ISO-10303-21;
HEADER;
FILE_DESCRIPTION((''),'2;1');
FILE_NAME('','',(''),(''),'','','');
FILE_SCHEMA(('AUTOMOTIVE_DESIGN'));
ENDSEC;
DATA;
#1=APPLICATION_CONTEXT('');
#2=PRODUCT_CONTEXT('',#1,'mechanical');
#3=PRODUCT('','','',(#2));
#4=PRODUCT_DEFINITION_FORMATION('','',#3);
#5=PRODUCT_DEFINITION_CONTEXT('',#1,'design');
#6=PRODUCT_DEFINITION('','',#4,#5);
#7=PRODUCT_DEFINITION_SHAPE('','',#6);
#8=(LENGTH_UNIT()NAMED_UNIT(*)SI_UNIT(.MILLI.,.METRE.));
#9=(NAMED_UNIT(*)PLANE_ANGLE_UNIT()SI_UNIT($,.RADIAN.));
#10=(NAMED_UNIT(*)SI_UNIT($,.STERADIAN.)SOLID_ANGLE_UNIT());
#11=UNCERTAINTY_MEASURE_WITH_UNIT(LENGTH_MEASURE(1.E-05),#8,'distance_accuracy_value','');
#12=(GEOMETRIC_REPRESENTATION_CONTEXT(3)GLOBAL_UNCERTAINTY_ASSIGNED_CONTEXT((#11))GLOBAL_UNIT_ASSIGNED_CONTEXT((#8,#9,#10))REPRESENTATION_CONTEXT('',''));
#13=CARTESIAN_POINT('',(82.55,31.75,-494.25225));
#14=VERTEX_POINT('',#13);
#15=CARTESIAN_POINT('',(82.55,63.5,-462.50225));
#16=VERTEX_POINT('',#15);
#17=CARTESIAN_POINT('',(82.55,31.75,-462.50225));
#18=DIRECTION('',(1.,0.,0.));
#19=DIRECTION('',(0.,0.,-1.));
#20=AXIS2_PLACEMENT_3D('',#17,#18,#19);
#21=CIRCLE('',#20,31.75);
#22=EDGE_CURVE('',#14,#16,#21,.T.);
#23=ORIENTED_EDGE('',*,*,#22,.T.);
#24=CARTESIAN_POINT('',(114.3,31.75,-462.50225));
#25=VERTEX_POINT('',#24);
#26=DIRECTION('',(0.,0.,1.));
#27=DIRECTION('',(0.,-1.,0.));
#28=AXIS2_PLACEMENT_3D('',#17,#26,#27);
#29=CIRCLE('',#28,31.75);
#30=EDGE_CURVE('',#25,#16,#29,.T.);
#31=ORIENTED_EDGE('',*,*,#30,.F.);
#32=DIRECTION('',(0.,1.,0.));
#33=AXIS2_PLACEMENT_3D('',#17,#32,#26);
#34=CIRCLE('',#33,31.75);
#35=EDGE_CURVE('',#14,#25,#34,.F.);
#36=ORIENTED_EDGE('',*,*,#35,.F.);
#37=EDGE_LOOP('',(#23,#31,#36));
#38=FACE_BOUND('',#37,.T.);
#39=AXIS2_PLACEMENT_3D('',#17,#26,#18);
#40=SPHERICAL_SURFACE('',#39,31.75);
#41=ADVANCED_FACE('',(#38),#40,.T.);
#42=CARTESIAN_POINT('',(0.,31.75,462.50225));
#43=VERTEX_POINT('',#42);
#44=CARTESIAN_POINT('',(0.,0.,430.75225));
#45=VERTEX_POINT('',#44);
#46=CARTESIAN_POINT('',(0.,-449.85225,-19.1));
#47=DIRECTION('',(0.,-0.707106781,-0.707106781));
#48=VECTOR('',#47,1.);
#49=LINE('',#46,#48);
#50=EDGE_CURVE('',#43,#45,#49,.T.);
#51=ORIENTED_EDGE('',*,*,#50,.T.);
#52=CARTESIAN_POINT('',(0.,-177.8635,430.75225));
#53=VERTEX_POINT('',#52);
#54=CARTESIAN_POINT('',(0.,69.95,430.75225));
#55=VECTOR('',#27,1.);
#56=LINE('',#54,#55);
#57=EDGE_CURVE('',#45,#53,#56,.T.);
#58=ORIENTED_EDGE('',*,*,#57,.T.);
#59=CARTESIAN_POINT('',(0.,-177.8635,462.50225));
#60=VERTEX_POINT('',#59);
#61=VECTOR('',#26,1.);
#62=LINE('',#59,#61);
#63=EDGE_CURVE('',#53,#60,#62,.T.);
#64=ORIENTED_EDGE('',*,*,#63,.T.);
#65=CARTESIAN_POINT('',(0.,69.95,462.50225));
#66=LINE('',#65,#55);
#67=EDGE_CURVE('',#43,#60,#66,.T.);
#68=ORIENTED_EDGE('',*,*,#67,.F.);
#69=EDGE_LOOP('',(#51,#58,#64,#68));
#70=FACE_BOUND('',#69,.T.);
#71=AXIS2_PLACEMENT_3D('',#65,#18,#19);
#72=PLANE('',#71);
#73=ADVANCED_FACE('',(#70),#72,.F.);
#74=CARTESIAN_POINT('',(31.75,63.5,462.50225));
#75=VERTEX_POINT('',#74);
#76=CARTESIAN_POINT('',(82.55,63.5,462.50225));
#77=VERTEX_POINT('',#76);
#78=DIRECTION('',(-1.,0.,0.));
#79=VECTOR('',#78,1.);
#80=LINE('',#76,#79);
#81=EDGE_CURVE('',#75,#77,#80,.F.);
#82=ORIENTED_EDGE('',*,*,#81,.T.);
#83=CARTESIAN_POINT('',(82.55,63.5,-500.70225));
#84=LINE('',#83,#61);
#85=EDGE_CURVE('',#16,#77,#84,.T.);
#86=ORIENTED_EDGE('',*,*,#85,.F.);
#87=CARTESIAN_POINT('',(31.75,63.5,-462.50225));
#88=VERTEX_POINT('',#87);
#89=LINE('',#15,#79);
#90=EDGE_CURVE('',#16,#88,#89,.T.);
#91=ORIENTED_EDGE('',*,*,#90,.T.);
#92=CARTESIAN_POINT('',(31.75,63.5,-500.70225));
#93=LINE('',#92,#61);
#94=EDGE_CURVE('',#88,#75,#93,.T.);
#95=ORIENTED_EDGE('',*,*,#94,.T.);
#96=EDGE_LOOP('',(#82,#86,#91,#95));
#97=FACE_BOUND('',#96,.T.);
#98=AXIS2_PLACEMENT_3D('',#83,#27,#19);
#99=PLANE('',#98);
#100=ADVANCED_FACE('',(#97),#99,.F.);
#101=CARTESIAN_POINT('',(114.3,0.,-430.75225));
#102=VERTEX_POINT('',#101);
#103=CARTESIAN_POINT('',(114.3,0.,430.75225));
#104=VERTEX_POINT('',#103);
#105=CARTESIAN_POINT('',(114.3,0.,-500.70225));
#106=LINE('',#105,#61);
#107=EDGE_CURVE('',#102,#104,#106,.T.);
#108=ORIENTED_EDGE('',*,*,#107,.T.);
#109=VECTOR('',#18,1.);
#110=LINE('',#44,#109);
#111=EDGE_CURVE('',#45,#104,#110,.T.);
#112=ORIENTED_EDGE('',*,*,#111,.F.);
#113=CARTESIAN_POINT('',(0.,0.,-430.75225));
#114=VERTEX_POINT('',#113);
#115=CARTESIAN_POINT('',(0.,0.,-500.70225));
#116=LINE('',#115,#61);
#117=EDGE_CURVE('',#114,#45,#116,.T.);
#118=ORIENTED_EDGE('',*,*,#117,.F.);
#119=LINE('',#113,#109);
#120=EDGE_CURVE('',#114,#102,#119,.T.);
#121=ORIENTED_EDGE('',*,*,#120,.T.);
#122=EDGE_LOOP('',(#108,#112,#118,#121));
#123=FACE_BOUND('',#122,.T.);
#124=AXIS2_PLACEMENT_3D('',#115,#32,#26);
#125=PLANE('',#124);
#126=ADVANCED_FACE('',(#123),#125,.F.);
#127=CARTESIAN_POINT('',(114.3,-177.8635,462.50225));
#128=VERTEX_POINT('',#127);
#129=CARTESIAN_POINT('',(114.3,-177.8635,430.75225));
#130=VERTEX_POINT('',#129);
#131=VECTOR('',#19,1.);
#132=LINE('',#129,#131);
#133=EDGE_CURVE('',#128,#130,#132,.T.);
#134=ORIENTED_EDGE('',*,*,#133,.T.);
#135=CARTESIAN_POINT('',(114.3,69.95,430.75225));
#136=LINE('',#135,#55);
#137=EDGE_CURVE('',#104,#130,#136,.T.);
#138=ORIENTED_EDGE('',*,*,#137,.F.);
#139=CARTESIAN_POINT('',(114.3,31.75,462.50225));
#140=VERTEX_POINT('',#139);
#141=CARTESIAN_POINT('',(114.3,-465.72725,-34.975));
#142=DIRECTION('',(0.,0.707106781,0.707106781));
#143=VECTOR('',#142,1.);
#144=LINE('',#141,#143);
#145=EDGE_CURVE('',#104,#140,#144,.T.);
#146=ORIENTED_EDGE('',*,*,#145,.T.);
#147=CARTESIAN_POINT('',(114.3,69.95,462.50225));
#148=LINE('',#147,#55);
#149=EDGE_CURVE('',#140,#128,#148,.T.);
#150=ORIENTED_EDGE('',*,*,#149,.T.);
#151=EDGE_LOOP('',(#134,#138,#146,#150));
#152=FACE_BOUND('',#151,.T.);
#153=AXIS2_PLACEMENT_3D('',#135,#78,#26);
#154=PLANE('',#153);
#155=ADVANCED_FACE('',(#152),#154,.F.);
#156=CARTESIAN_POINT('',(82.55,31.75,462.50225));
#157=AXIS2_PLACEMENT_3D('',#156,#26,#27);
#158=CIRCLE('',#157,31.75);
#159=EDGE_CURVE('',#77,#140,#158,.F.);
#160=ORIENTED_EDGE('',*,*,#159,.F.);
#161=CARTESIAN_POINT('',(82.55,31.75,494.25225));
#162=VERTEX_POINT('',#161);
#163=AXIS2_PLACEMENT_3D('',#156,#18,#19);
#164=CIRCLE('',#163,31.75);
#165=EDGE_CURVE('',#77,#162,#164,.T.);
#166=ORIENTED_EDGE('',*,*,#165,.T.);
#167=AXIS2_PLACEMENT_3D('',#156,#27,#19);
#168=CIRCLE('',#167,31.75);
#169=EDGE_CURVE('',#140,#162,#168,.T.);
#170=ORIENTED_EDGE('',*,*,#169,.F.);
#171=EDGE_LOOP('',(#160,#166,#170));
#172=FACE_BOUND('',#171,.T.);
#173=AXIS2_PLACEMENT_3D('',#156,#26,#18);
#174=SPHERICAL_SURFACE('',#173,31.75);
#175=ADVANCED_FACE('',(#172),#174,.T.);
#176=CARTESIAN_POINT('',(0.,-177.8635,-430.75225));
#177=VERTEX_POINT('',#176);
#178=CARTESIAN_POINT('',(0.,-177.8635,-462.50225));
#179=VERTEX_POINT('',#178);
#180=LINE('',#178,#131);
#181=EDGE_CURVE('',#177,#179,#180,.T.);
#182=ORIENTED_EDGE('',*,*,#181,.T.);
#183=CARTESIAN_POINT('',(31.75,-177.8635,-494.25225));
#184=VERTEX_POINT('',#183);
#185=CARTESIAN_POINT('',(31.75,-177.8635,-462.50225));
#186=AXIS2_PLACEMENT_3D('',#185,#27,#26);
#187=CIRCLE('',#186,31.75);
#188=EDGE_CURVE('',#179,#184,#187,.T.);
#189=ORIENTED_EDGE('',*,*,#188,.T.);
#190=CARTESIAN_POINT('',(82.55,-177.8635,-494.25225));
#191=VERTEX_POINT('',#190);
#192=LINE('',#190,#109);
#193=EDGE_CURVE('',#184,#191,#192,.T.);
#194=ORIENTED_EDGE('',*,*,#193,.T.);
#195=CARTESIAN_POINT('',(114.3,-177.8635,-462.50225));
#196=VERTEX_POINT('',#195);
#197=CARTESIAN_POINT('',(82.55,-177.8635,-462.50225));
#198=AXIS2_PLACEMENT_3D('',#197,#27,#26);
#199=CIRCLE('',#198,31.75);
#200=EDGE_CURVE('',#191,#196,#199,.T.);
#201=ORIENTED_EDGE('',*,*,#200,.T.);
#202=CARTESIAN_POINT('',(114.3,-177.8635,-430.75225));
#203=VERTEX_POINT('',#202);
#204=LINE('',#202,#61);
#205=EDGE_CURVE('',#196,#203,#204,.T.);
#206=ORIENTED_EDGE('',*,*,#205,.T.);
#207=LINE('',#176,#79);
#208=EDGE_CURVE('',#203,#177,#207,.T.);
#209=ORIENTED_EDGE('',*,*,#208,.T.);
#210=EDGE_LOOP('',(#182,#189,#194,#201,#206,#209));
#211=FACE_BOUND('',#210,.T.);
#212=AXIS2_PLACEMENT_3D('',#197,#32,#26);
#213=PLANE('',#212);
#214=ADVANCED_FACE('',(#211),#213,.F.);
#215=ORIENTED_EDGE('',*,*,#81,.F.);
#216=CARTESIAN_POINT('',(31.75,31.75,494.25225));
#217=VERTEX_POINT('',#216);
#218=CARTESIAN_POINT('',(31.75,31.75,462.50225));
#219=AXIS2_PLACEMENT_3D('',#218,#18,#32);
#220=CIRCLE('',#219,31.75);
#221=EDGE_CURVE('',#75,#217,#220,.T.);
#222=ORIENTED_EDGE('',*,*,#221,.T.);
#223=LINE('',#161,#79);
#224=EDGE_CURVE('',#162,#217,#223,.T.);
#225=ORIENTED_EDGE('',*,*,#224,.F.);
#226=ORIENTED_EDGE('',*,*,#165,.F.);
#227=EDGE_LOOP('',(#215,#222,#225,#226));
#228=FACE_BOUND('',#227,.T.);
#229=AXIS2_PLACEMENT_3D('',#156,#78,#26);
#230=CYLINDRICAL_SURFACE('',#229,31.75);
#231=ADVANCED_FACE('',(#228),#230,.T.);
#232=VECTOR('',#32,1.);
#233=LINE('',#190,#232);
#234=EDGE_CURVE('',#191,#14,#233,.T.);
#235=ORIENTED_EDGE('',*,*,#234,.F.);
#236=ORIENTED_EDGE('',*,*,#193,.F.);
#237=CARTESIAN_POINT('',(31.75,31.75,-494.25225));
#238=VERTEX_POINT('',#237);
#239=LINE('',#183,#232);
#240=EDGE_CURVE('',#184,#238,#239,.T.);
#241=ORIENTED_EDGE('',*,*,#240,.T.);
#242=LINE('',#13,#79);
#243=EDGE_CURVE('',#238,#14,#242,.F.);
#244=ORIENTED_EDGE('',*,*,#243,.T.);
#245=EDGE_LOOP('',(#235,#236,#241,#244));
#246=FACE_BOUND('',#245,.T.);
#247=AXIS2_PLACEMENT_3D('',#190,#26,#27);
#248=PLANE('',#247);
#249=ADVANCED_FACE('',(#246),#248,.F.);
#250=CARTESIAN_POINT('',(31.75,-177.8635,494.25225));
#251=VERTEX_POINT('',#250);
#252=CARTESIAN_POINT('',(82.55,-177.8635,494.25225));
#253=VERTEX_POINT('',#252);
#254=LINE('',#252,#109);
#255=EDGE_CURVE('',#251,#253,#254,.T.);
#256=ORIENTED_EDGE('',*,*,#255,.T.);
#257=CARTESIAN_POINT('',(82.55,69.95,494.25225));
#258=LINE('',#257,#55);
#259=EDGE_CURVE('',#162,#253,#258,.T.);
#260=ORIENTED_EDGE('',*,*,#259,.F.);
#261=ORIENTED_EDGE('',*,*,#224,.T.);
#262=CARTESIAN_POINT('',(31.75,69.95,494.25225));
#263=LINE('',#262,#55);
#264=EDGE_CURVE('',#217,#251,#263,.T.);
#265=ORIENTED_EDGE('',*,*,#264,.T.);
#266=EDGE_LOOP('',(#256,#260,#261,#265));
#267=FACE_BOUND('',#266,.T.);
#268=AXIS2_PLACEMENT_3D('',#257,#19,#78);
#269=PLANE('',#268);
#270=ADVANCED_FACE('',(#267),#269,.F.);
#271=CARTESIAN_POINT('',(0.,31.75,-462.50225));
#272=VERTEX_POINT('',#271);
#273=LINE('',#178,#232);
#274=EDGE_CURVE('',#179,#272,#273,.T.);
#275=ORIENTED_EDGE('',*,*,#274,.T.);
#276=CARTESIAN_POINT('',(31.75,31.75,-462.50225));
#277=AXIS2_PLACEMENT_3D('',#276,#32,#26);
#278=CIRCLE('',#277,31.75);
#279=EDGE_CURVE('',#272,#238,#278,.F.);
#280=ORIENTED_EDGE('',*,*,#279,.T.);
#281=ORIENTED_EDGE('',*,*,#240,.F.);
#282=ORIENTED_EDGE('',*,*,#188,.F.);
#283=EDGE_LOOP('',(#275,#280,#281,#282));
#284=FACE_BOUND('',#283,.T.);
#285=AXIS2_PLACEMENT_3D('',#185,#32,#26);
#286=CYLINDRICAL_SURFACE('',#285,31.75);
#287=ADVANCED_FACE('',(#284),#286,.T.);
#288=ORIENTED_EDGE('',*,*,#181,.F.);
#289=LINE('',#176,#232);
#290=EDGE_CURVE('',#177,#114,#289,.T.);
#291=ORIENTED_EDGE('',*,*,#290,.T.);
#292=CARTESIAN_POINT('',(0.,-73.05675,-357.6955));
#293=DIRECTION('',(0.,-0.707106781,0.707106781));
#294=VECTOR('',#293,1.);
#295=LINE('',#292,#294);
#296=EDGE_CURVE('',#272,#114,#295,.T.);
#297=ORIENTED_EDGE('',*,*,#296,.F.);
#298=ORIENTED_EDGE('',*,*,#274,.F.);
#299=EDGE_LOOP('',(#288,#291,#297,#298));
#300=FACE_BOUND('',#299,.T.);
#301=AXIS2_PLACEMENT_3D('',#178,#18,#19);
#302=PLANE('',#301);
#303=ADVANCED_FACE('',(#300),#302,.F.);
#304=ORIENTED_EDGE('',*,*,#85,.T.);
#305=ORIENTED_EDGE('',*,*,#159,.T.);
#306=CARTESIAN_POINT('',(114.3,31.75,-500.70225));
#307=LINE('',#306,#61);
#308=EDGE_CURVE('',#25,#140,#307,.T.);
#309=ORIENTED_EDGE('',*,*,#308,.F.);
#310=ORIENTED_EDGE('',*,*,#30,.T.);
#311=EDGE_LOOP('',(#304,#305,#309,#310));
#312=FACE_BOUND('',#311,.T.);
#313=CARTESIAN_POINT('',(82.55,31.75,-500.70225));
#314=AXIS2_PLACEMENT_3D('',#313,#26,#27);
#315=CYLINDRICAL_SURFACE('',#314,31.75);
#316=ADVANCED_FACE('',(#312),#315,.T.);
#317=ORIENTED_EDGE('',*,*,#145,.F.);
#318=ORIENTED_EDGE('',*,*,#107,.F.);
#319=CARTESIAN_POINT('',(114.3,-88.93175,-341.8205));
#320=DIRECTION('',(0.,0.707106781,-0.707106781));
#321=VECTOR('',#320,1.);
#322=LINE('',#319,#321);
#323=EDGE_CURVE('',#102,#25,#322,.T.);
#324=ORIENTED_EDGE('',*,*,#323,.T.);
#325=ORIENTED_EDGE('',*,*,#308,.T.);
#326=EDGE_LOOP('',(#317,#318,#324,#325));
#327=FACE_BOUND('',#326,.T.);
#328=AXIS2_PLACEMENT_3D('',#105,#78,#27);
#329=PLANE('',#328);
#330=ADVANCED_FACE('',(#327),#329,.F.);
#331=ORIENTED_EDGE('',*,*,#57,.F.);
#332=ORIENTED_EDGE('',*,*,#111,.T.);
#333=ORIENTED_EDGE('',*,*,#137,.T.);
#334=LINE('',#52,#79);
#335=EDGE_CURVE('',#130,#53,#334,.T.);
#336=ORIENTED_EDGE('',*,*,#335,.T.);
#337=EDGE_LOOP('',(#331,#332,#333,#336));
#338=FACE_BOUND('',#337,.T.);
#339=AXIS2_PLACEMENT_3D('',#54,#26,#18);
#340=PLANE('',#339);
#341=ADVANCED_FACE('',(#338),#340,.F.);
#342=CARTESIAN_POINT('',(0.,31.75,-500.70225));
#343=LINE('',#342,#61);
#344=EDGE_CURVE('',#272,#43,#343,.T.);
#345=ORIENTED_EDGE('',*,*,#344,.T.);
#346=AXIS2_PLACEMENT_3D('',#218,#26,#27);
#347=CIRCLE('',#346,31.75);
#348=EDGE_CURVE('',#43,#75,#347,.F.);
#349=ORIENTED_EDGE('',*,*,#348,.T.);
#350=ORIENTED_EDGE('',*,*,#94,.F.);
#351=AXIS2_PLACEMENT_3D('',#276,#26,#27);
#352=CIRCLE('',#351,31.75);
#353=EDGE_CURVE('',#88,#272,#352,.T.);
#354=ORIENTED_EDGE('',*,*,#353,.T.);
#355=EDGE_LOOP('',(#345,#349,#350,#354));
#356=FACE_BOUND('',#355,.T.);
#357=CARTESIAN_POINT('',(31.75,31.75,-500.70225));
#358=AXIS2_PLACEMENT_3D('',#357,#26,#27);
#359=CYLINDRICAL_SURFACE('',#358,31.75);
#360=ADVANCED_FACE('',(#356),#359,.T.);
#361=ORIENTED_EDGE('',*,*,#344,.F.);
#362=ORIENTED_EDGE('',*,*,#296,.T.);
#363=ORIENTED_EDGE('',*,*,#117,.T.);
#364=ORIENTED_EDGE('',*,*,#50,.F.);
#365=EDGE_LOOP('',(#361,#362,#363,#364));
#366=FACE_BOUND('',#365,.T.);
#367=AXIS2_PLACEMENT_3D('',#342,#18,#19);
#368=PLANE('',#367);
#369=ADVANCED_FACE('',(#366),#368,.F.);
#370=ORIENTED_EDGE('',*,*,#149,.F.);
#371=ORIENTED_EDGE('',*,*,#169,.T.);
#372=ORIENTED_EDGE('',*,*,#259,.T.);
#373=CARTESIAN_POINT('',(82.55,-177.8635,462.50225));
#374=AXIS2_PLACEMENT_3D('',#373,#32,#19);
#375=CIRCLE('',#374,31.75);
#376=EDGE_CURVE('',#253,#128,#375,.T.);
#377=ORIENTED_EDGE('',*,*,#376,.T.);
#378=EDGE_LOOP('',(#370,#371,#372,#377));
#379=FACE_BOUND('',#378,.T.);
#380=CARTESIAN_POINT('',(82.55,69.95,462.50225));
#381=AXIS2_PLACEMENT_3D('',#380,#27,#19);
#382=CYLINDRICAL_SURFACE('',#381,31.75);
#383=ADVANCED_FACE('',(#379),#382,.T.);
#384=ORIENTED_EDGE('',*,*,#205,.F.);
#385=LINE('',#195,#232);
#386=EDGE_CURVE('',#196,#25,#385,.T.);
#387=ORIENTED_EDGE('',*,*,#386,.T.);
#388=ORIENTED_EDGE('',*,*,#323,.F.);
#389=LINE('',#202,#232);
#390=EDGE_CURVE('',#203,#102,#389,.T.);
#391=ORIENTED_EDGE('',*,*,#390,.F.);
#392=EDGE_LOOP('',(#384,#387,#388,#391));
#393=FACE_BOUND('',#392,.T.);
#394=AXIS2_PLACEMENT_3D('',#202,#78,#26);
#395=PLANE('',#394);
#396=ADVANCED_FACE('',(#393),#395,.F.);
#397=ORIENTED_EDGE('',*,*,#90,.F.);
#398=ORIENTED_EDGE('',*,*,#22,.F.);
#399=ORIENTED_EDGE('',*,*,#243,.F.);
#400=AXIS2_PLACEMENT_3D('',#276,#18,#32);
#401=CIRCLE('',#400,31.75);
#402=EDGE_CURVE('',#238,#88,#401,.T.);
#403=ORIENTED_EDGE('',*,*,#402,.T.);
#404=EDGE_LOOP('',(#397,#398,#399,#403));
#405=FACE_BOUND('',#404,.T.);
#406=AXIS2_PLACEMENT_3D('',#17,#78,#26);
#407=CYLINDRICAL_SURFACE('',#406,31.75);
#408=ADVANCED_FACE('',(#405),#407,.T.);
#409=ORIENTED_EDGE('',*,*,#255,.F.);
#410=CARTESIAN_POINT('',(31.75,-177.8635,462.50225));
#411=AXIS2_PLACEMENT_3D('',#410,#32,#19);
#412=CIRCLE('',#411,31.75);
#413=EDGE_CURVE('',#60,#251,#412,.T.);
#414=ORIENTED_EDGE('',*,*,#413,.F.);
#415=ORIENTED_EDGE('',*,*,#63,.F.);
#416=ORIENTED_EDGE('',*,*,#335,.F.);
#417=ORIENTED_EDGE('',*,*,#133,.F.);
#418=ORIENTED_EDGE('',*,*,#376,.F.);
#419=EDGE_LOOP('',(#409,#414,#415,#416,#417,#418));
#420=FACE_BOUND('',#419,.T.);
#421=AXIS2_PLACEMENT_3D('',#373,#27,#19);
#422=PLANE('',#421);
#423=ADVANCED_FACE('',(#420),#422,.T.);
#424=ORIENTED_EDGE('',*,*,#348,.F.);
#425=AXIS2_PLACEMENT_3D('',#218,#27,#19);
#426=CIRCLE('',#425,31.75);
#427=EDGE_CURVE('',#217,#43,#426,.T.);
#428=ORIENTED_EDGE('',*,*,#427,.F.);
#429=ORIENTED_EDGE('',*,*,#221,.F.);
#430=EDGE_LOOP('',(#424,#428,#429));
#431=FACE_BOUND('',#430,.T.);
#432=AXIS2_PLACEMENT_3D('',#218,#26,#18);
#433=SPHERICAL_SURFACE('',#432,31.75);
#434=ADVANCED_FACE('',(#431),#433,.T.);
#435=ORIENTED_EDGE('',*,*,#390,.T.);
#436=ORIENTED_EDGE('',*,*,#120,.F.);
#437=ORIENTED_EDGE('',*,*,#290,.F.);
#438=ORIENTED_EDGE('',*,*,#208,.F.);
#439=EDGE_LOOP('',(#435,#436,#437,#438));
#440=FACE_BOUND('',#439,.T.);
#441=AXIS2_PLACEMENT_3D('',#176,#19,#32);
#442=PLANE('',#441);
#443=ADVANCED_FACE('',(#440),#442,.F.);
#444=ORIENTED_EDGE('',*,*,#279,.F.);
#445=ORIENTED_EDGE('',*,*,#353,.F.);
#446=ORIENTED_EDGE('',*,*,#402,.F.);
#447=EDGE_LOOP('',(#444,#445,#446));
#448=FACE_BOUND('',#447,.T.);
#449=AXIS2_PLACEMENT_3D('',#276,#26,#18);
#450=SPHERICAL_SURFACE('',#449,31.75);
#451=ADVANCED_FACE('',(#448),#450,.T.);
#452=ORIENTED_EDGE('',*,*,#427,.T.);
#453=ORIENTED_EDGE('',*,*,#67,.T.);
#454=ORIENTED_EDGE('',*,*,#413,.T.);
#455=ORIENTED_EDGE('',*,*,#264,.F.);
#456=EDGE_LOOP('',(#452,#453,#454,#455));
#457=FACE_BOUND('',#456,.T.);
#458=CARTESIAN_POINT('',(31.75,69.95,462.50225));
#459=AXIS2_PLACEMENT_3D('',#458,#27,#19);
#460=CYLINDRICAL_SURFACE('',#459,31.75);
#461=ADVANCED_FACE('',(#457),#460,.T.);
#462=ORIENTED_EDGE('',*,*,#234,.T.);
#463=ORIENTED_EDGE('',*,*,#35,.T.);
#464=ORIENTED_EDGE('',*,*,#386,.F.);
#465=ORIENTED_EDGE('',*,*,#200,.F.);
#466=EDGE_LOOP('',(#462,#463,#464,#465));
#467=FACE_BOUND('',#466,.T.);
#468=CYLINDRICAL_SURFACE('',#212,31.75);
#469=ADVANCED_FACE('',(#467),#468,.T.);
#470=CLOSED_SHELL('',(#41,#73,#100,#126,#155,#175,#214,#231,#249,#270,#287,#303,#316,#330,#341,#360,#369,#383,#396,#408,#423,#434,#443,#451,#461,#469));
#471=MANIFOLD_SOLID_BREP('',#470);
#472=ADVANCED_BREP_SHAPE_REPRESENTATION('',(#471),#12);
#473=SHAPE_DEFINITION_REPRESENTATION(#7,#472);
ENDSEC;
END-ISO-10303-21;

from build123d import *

# Parameters (mm, degrees)
FILLET1_R = 31.75


with BuildPart() as part:
    # Sweep2: sweep along a path in Sketch1
    with BuildLine(Plane(origin=(0, 0, 0), x_dir=(0, 0, -1), z_dir=(1, 0, 0))) as sweep2_path:
        Line((-430.75225, -177.8635), (-430.75225, 0))
        Line((-430.75225, 0), (430.75225, 0))
        Line((430.75225, 0), (430.75225, -177.8635))
    # Sketch2 → Sweep2 (sweep)
    with BuildSketch(Plane(origin=(0, 0, 0), x_dir=(1, 0, 0), z_dir=(0, 1, 0))):
        with BuildLine():
            Line((0, -430.75225), (114.3, -430.75225))
            Line((114.3, -430.75225), (114.3, -462.50225))
            ThreePointArc((114.3, -462.50225), (105.000640303, -484.952890303), (82.55, -494.25225))
            Line((82.55, -494.25225), (31.75, -494.25225))
            ThreePointArc((31.75, -494.25225), (9.299359697, -484.952890303), (0, -462.50225))
            Line((0, -462.50225), (0, -430.75225))
        make_face()
    sweep(path=sweep2_path.line, transition=Transition.RIGHT)

    # Fillet1
    # the kernel refuses this fillet: 31.75 mm, written as the material it takes off along each edge
    with BuildSketch(Plane(origin=(82.55, 31.75, -462.50225), x_dir=(0, 0, -1), z_dir=(0, 1, 0))) as fillet1_piece_1_section:
        Polygon((0, 0), (FILLET1_R * 1.02, 0), (FILLET1_R * 1.02, -FILLET1_R * 1.02), (0, -FILLET1_R * 1.02), align=None)
    fillet1_piece_1 = extrude(amount=FILLET1_R * 1.02, mode=Mode.PRIVATE)
    fillet1_piece_1 = fillet1_piece_1 - Plane(origin=(82.55, 31.75, -462.50225), x_dir=(-0.7071067811865477, 0, 0.7071067811865474), z_dir=(0, 1, 0)) * Sphere(FILLET1_R, mode=Mode.PRIVATE)
    add(fillet1_piece_1, mode=Mode.SUBTRACT)
    with BuildSketch(Plane(origin=(31.75, 31.75, -462.50225), x_dir=(0, 0, -1), z_dir=(0, 1, 0))) as fillet1_piece_2_section:
        Polygon((0, 0), (FILLET1_R * 1.02, 0), (FILLET1_R * 1.02, FILLET1_R * 1.02), (0, FILLET1_R * 1.02), align=None)
    fillet1_piece_2 = extrude(amount=FILLET1_R * 1.02, mode=Mode.PRIVATE)
    fillet1_piece_2 = fillet1_piece_2 - Plane(origin=(31.75, 31.75, -462.50225), x_dir=(0.7071067811865475, 0, 0.7071067811865475), z_dir=(0, 1, 0)) * Sphere(FILLET1_R, mode=Mode.PRIVATE)
    add(fillet1_piece_2, mode=Mode.SUBTRACT)
    with BuildSketch(Plane(origin=(31.75, 31.75, 462.50225), x_dir=(0, 1, 0), z_dir=(0, 0, 1))) as fillet1_piece_3_section:
        Polygon((0, 0), (FILLET1_R * 1.02, 0), (FILLET1_R * 1.02, FILLET1_R * 1.02), (0, FILLET1_R * 1.02), align=None)
    fillet1_piece_3 = extrude(amount=FILLET1_R * 1.02, mode=Mode.PRIVATE)
    fillet1_piece_3 = fillet1_piece_3 - Plane(origin=(31.75, 31.75, 462.50225), x_dir=(0.7071067811865477, -0.7071067811865475, 0), z_dir=(0, 0, 1)) * Sphere(FILLET1_R, mode=Mode.PRIVATE)
    add(fillet1_piece_3, mode=Mode.SUBTRACT)
    with BuildSketch(Plane(origin=(82.55, 31.75, 462.50225), x_dir=(0, 1, 0), z_dir=(0, 0, 1))) as fillet1_piece_4_section:
        Polygon((0, 0), (FILLET1_R * 1.02, 0), (FILLET1_R * 1.02, -FILLET1_R * 1.02), (0, -FILLET1_R * 1.02), align=None)
    fillet1_piece_4 = extrude(amount=FILLET1_R * 1.02, mode=Mode.PRIVATE)
    fillet1_piece_4 = fillet1_piece_4 - Plane(origin=(82.55, 31.75, 462.50225), x_dir=(-0.7071067811865475, -0.7071067811865476, 0), z_dir=(0, 0, 1)) * Sphere(FILLET1_R, mode=Mode.PRIVATE)
    add(fillet1_piece_4, mode=Mode.SUBTRACT)
    with BuildSketch(Plane(origin=(82.55, 63.5, -494.25225), x_dir=(0, 0, 1), z_dir=(-1, 0, 0)), Plane(origin=(82.55, 63.5, 494.25225), x_dir=(0, -1, 0), z_dir=(-1, 0, 0))) as fillet1_piece_5:
        with BuildLine():
            CenterArc((FILLET1_R, -FILLET1_R), FILLET1_R, 90, 90)
            Line((0, -FILLET1_R), (0, 0))
            Line((0, 0), (FILLET1_R, 0))
        make_face()
    extrude(amount=50.8, mode=Mode.SUBTRACT)


solid = part.part
